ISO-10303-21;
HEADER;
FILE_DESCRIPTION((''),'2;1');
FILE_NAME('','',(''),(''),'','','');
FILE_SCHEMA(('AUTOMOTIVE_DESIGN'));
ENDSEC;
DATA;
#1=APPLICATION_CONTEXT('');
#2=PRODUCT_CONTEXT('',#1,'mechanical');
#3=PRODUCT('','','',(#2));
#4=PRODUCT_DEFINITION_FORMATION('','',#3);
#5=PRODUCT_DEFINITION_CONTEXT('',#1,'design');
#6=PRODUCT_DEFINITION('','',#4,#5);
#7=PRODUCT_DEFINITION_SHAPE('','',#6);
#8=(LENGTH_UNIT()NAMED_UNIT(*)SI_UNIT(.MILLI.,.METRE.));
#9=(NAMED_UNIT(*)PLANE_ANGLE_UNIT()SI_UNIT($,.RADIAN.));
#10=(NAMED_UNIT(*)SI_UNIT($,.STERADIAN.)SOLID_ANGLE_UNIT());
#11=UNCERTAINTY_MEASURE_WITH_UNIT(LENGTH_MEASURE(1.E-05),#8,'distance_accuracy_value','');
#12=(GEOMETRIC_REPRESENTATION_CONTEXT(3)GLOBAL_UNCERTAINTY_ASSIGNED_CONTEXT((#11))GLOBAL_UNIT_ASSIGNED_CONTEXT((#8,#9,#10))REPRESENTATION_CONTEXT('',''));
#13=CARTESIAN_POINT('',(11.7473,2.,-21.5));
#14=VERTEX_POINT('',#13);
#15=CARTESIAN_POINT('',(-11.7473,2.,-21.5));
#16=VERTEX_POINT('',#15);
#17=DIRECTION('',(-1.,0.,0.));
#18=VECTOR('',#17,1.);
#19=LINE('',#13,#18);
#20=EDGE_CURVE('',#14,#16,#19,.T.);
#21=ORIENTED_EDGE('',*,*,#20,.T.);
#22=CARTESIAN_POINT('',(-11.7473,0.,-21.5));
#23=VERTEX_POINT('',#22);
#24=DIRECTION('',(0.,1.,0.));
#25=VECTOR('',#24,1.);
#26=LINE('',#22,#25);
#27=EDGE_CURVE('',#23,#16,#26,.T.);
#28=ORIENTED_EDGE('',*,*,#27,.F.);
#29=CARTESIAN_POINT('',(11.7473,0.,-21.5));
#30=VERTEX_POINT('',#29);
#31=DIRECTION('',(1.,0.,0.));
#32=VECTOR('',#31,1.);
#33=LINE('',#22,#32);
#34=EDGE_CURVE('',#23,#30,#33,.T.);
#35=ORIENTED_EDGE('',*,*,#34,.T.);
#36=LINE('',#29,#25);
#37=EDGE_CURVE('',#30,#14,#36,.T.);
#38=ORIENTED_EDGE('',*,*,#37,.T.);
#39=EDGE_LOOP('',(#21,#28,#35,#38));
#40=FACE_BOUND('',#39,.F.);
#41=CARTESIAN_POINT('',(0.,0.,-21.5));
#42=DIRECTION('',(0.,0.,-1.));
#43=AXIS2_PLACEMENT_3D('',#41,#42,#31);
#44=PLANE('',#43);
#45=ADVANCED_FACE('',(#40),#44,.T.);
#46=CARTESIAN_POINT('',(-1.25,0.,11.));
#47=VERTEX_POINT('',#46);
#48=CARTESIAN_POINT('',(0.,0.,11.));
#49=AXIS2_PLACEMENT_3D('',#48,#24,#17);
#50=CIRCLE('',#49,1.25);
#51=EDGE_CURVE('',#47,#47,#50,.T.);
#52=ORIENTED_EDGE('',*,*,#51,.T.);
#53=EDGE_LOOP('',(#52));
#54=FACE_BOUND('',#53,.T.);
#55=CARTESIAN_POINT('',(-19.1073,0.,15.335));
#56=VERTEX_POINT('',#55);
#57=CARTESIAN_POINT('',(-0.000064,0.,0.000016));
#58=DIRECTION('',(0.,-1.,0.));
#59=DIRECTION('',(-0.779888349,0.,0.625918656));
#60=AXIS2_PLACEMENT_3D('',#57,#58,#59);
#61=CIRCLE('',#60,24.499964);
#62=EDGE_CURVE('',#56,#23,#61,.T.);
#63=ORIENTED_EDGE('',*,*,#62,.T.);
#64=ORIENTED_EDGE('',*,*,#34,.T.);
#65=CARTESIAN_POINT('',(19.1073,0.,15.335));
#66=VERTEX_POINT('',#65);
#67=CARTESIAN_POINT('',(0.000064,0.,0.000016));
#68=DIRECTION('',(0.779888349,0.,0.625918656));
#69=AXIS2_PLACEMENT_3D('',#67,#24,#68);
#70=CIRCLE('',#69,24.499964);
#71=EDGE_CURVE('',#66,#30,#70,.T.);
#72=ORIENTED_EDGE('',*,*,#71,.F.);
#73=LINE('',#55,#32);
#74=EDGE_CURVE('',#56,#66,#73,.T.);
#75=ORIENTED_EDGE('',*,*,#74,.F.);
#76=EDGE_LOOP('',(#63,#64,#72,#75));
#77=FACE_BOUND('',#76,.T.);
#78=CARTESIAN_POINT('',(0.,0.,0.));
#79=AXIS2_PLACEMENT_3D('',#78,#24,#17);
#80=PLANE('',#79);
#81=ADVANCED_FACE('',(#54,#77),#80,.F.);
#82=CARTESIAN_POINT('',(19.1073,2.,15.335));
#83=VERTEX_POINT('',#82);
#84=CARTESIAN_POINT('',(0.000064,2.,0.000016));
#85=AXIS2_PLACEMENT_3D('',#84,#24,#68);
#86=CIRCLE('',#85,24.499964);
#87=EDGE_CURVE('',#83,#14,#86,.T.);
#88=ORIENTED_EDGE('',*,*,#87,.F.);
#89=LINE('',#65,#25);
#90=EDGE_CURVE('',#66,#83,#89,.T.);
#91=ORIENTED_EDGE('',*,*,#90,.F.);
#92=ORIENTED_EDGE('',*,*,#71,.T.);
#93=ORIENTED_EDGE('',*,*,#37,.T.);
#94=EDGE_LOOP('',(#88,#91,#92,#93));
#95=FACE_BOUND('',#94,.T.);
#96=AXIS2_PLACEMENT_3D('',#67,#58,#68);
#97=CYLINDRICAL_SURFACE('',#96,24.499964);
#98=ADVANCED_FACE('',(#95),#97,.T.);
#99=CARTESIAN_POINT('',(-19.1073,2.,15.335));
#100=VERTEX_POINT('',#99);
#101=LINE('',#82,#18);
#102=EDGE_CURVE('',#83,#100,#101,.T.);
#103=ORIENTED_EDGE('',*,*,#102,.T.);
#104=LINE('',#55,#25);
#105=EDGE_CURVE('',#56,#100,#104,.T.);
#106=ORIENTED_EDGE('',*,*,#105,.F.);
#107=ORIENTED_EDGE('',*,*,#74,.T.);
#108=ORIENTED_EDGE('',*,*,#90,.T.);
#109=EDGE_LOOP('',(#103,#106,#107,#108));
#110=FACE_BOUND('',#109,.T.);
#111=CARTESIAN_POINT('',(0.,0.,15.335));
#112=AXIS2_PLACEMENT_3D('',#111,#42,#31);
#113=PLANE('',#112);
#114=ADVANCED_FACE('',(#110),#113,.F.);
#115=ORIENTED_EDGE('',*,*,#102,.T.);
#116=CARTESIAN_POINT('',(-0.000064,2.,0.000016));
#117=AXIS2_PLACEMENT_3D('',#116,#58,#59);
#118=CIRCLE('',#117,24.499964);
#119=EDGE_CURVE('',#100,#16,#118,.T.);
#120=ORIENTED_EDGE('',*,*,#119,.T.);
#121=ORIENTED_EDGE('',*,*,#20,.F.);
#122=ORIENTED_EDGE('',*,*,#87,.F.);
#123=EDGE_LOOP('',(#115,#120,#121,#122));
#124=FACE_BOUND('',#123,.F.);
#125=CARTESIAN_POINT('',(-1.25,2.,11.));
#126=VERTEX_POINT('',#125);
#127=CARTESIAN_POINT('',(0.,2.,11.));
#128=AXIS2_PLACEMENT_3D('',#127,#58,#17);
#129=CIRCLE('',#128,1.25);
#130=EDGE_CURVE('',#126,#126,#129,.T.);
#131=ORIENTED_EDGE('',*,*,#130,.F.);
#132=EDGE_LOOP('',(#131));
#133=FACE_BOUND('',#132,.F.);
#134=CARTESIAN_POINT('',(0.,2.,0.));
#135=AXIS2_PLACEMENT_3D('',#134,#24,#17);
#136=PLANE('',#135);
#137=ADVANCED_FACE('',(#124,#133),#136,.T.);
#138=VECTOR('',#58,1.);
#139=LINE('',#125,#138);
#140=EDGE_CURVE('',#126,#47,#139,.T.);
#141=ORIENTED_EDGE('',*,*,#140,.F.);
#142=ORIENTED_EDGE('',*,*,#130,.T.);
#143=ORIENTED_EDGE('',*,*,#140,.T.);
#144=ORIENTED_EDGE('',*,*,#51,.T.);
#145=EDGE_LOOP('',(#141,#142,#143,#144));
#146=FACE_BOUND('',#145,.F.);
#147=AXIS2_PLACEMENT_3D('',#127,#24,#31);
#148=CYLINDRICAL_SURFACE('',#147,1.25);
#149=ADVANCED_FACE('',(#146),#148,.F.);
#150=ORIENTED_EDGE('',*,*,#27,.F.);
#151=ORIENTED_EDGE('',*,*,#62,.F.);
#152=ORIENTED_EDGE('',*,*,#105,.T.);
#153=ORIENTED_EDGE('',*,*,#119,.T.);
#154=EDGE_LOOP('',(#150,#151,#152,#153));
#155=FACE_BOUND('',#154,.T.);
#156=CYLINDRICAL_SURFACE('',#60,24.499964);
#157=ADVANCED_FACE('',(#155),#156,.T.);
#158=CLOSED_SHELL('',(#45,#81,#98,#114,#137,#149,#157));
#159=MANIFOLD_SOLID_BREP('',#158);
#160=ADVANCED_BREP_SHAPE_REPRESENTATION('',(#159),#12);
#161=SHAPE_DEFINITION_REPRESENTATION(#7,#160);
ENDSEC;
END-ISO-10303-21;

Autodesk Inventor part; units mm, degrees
ref_plane "YZ Plane" through (0, 0, 0) normal (1, 0, 0) x (0, 1, 0)
ref_plane "XZ Plane" through (0, 0, 0) normal (0, 1, 0) x (-1, 0, 0)
ref_plane "XY Plane" through (0, 0, 0) normal (0, 0, 1) x (1, 0, 0)
sketch "スケッチ1" plane through (0, 0, 0) normal (0, 1, 0) x (-1, 0, 0)
  point P0 (0, 0)
sketch "スケッチ2" plane through (0, 0, 0) normal (0, 1, 0) x (-1, 0, 0)
  arc A0 (-19.1073, 15.335) -> (-11.7473, -21.5) centre (0, 0) ccw
  line L0 (0, 0) -> (0, -21.5)
  line L1 (0, 0) -> (0, 15.335)
  line L2 (0, -21.5) -> (-11.7473, -21.5)
  line L3 (0, 15.335) -> (-19.1073, 15.335)
  dimension "d1" = 21.5
  dimension "d3" = 15.335
  dimension "d4" = 24.5
extrude "押し出し1" add sketch "スケッチ2" along normal blind 2
sketch "スケッチ3" plane through (0, 2, 0) normal (0, 1, 0) x (1, 0, 0)
  line L0 (0, 21.5) -> (0, -15.335) projected
  circle A0 centre (0, -11) radius 1.25
  point P0 (0, 0)
  point P1 (0, -9.75)
  point P2 (0, -12.25)
  dimension "d7" = 2.5
  dimension "d8" = 11
extrude "押し出し2" cut sketch "スケッチ3" against normal blind 10 contours A0 L0 picked at (0.1808, -10.6246)
mirror "ミラー2" about plane through (0, 0, -21.5) normal (-1, 0, 0) of "押し出し2", "押し出し1"
properties part number "huta"
